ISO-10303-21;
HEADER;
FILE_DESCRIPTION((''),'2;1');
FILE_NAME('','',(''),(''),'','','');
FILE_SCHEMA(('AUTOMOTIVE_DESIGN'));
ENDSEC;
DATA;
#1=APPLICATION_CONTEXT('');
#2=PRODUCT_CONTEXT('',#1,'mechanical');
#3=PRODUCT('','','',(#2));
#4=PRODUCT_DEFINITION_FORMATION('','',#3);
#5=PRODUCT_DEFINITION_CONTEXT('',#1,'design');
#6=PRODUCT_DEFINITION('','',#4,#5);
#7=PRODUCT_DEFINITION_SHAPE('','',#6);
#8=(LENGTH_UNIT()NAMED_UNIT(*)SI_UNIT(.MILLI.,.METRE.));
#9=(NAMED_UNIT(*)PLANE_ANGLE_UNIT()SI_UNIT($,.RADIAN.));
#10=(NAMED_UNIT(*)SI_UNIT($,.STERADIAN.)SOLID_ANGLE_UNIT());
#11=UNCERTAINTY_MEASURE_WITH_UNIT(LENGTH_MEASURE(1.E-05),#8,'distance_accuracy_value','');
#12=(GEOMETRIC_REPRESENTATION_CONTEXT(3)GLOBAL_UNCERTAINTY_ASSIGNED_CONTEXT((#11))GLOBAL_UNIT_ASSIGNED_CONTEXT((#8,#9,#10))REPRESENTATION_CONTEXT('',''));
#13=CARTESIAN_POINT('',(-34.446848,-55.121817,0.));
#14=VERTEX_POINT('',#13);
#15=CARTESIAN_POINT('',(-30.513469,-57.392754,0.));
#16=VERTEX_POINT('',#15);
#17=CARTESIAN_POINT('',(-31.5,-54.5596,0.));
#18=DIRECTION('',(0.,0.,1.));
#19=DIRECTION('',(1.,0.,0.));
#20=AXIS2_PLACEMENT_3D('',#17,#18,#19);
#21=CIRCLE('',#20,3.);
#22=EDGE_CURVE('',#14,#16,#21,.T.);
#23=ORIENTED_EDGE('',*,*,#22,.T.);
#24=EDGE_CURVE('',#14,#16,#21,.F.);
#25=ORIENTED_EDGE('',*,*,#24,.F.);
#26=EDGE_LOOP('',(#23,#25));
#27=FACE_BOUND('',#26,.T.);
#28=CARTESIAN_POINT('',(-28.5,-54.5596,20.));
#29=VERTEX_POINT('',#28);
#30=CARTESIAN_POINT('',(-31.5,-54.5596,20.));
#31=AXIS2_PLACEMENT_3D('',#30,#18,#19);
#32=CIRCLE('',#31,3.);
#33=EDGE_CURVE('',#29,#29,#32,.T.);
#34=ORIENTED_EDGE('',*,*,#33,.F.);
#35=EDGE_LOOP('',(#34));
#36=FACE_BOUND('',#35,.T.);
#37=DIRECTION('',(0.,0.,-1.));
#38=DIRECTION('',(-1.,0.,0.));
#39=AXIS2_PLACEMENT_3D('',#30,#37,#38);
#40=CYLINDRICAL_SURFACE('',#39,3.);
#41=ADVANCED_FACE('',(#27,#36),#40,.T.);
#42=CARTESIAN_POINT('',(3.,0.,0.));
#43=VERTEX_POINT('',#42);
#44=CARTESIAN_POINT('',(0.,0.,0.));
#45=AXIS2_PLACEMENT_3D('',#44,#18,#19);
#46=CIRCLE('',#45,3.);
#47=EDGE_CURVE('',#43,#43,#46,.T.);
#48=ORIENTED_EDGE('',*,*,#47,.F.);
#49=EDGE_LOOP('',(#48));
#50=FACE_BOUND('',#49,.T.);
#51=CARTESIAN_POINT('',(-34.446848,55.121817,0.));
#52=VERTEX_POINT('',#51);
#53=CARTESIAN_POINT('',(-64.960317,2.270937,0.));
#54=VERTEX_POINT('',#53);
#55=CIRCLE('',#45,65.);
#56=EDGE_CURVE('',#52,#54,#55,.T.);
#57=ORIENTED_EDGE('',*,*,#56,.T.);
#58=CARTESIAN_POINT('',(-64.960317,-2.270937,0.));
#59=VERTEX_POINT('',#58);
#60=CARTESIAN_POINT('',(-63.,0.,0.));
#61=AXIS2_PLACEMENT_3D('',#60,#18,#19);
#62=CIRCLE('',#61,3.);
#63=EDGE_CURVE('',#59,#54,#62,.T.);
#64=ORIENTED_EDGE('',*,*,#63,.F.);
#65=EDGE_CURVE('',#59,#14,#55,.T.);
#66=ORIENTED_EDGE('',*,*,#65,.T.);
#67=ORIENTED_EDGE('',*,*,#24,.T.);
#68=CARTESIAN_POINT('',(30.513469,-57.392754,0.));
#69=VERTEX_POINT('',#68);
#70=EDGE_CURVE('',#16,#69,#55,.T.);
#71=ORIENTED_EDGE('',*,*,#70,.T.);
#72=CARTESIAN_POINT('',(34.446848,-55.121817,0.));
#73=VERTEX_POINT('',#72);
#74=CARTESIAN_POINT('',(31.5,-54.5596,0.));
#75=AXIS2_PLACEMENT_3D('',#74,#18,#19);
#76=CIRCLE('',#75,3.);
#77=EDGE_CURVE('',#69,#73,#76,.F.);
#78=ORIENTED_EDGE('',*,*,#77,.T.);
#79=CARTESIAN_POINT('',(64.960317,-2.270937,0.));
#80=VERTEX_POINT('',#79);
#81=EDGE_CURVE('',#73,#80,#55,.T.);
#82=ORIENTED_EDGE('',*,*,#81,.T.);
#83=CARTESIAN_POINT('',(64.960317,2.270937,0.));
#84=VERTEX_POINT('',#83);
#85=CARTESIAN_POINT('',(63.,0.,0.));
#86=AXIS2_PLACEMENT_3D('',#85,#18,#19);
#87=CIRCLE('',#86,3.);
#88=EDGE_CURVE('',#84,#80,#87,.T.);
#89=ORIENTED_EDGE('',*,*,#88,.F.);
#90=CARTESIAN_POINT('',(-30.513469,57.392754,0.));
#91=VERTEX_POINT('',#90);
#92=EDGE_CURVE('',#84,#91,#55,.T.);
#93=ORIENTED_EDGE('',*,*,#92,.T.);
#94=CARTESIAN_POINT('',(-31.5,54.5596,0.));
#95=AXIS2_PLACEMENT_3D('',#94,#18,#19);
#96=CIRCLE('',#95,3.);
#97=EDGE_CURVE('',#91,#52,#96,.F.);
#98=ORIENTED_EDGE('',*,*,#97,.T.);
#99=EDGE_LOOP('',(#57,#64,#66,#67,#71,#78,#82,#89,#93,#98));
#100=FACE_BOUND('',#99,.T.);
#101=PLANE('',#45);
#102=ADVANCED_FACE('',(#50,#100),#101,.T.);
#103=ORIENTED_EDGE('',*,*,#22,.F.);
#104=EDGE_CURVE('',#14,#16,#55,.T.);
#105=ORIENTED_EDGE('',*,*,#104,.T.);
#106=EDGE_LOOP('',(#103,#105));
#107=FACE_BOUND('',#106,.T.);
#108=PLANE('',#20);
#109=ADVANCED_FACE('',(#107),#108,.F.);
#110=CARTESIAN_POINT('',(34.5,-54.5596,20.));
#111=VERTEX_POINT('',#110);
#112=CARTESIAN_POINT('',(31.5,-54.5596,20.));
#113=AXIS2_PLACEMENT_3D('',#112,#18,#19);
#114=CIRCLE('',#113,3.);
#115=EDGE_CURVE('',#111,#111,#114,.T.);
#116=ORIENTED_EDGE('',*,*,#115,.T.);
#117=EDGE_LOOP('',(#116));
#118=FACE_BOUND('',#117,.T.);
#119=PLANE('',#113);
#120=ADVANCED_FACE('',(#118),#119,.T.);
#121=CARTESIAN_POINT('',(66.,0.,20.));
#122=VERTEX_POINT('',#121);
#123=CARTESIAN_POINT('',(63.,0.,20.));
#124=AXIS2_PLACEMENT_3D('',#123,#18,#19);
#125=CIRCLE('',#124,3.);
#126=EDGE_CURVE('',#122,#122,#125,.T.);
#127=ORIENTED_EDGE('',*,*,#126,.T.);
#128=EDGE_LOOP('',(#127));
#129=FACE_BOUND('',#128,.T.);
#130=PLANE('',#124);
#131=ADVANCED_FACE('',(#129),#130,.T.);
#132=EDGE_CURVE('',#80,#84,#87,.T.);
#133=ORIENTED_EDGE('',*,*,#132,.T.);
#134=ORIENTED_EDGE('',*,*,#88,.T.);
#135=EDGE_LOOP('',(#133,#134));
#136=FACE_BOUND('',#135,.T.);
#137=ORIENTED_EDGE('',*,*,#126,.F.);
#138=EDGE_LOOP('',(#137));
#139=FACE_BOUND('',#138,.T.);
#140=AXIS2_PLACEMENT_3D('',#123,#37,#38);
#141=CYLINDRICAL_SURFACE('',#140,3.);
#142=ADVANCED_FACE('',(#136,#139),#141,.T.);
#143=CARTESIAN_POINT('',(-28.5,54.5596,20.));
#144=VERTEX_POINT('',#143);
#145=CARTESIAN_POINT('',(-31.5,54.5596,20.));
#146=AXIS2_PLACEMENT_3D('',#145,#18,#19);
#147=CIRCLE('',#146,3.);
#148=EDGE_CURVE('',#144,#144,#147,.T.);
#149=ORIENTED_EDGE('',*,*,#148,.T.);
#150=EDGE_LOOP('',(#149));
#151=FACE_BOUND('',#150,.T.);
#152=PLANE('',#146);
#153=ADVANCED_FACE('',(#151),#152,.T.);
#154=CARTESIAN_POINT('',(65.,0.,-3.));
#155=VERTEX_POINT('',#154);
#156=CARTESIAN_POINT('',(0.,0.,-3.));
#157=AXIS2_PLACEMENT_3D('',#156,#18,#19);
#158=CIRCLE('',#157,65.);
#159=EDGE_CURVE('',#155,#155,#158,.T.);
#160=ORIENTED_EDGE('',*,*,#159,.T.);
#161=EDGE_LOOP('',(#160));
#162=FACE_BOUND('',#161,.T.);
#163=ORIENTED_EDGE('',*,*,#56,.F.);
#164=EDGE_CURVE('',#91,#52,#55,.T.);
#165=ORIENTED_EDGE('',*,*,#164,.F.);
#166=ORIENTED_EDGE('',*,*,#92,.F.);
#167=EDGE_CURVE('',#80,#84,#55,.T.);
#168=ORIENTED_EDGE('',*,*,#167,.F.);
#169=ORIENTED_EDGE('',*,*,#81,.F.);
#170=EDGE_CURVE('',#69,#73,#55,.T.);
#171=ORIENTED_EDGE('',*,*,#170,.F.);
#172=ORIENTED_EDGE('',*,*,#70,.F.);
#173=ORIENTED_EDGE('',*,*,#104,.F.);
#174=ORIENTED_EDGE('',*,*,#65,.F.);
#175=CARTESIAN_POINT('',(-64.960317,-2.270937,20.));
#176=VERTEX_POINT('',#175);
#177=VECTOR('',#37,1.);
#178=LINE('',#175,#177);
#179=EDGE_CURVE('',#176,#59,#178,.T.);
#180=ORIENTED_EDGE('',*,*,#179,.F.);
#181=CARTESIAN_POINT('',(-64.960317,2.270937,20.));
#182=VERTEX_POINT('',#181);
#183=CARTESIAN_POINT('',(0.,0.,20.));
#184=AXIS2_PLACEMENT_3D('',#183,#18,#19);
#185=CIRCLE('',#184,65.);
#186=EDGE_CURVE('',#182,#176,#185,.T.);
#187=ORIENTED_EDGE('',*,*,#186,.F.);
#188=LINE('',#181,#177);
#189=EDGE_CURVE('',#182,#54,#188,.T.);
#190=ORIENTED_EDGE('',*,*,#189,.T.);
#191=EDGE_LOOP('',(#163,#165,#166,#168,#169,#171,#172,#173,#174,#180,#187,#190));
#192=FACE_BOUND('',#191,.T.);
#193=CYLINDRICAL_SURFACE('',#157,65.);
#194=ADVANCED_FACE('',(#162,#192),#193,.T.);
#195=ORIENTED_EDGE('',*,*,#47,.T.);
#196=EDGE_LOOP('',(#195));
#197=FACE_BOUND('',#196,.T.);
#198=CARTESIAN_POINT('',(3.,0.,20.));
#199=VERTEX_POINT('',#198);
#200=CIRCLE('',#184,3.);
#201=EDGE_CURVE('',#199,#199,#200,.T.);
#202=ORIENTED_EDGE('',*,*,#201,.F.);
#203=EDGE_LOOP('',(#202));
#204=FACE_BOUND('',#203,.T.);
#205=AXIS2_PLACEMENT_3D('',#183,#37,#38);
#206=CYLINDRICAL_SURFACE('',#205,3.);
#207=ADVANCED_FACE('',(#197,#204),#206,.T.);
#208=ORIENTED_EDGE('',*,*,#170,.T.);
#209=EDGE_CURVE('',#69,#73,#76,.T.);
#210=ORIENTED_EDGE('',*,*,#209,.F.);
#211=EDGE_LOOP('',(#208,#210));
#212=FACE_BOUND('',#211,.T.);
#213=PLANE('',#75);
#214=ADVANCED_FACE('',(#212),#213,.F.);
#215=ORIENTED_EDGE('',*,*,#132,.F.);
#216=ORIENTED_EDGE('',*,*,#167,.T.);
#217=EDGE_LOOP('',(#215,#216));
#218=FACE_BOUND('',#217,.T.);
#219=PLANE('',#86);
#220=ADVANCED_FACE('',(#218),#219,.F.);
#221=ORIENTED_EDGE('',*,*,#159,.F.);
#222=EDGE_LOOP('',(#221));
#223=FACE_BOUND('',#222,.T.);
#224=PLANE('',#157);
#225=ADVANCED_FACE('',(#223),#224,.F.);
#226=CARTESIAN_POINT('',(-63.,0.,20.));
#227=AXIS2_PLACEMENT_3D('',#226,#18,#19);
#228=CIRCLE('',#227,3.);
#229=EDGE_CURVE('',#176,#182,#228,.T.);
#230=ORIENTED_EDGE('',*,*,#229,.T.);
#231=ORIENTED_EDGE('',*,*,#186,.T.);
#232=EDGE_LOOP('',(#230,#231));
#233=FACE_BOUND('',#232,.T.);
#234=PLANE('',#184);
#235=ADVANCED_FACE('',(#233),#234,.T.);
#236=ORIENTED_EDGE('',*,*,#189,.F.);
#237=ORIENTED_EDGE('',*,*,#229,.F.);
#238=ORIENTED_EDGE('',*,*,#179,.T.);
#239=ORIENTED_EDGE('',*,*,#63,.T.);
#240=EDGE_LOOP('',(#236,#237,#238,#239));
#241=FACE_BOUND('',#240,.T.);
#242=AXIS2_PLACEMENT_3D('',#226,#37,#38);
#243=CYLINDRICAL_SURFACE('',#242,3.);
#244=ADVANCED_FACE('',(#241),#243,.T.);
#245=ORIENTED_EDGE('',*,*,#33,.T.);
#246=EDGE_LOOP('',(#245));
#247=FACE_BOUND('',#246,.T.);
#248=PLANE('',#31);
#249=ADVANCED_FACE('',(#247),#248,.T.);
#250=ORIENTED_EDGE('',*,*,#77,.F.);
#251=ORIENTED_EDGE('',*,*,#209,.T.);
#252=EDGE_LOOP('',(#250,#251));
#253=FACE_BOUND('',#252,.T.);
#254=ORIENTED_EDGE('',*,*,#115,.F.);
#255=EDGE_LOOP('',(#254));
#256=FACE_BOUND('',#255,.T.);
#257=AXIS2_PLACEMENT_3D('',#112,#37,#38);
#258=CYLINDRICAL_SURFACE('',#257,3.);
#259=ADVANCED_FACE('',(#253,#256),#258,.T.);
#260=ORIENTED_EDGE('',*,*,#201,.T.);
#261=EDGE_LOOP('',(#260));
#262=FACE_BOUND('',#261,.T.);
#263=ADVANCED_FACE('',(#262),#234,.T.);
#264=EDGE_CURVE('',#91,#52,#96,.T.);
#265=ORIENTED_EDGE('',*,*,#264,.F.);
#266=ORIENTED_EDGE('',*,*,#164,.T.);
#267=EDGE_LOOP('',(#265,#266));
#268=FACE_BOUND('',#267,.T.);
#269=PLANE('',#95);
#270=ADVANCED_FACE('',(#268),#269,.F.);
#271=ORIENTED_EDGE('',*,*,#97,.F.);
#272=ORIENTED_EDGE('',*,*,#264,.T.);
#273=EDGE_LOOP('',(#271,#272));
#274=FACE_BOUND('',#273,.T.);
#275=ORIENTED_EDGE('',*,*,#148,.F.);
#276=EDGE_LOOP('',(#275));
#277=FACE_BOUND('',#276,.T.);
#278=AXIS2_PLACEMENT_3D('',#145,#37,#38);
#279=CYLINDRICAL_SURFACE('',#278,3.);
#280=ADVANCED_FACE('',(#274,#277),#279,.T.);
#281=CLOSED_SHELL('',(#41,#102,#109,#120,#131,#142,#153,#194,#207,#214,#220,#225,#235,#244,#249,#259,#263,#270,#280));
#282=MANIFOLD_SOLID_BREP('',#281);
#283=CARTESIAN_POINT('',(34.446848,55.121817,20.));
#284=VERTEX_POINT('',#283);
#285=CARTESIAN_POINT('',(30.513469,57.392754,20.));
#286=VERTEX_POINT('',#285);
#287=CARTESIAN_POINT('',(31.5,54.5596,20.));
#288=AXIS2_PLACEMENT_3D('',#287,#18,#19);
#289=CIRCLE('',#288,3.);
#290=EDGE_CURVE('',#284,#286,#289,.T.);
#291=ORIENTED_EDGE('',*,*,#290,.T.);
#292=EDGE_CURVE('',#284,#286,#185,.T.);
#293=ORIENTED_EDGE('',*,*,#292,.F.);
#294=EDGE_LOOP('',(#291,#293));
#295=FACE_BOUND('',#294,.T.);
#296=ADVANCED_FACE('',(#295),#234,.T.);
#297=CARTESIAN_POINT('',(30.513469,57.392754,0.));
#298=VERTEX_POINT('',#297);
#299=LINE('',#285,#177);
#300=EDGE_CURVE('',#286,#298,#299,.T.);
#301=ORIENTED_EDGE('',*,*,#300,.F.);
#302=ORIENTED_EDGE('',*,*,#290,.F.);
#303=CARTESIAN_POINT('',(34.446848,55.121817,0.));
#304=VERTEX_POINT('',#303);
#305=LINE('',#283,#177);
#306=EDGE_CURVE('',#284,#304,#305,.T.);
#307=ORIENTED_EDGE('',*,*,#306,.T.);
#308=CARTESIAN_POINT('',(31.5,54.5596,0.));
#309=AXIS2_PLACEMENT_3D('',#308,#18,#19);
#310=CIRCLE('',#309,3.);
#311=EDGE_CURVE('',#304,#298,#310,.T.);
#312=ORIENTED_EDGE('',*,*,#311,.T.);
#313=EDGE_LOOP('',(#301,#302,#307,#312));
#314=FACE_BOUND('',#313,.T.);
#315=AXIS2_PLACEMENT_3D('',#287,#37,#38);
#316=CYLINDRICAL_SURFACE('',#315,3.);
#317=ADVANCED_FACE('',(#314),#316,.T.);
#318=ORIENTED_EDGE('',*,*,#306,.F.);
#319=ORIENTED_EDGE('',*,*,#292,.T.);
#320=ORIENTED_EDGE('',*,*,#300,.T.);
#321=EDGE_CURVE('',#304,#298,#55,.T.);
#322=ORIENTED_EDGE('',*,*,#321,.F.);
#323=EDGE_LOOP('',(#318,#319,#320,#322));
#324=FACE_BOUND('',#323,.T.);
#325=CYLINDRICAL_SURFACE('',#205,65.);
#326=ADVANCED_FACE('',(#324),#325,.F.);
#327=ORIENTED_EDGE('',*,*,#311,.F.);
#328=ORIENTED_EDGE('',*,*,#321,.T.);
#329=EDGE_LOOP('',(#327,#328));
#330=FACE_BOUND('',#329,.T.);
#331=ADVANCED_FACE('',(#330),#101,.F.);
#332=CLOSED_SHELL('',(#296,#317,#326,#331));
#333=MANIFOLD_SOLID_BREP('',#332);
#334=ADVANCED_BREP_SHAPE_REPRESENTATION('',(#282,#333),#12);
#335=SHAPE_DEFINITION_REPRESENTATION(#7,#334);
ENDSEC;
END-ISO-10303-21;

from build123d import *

# Parameters (mm, degrees)
SKETCH_1_R          = 65
EXTRUDE_1_DEPTH     = 3
EXTRUDE_2_OUTLINE_R = 3
EXTRUDE_2_DEPTH     = 20
SKETCH_3_R          = 3
EXTRUDE_3_DEPTH     = 20


# Read off the part's stored shape, not the designer's step: 凸台-拉伸2
with BuildPart() as part:
    # 草图1 → 凸台-拉伸1 (new body)
    with BuildSketch(Plane.XY):
        Circle(SKETCH_1_R)
    extrude(amount=-EXTRUDE_1_DEPTH)

    # 凸台-拉伸2 outline → 凸台-拉伸2 (add)
    with BuildSketch(Plane.XY):
        with BuildLine():
            ThreePointArc((34.446847976, 55.121816593), (33, 57.15767665), (30.513469484, 57.392753724))
            ThreePointArc((30.513469484, 57.392753724), (32.5, 56.291651246), (34.446847976, 55.121816593))
        make_face()
        with Locations((-31.5, 54.559600438)):
            Circle(EXTRUDE_2_OUTLINE_R)
        with Locations((63, 0)):
            Circle(EXTRUDE_2_OUTLINE_R)
        with BuildLine():
            ThreePointArc((-64.96031746, -2.270937131), (-60, 0), (-64.96031746, 2.270937131))
            ThreePointArc((-64.96031746, 2.270937131), (-65, 0), (-64.96031746, -2.270937131))
        make_face()
        with Locations((31.5, -54.559600438)):
            Circle(EXTRUDE_2_OUTLINE_R)
        with Locations((-31.5, -54.559600438)):
            Circle(EXTRUDE_2_OUTLINE_R)
    extrude(amount=EXTRUDE_2_DEPTH)

    # 草图3 → 凸台-拉伸3 (add)
    with BuildSketch(Plane.XY):
        Circle(SKETCH_3_R)
    extrude(amount=EXTRUDE_3_DEPTH)


solid = part.part
